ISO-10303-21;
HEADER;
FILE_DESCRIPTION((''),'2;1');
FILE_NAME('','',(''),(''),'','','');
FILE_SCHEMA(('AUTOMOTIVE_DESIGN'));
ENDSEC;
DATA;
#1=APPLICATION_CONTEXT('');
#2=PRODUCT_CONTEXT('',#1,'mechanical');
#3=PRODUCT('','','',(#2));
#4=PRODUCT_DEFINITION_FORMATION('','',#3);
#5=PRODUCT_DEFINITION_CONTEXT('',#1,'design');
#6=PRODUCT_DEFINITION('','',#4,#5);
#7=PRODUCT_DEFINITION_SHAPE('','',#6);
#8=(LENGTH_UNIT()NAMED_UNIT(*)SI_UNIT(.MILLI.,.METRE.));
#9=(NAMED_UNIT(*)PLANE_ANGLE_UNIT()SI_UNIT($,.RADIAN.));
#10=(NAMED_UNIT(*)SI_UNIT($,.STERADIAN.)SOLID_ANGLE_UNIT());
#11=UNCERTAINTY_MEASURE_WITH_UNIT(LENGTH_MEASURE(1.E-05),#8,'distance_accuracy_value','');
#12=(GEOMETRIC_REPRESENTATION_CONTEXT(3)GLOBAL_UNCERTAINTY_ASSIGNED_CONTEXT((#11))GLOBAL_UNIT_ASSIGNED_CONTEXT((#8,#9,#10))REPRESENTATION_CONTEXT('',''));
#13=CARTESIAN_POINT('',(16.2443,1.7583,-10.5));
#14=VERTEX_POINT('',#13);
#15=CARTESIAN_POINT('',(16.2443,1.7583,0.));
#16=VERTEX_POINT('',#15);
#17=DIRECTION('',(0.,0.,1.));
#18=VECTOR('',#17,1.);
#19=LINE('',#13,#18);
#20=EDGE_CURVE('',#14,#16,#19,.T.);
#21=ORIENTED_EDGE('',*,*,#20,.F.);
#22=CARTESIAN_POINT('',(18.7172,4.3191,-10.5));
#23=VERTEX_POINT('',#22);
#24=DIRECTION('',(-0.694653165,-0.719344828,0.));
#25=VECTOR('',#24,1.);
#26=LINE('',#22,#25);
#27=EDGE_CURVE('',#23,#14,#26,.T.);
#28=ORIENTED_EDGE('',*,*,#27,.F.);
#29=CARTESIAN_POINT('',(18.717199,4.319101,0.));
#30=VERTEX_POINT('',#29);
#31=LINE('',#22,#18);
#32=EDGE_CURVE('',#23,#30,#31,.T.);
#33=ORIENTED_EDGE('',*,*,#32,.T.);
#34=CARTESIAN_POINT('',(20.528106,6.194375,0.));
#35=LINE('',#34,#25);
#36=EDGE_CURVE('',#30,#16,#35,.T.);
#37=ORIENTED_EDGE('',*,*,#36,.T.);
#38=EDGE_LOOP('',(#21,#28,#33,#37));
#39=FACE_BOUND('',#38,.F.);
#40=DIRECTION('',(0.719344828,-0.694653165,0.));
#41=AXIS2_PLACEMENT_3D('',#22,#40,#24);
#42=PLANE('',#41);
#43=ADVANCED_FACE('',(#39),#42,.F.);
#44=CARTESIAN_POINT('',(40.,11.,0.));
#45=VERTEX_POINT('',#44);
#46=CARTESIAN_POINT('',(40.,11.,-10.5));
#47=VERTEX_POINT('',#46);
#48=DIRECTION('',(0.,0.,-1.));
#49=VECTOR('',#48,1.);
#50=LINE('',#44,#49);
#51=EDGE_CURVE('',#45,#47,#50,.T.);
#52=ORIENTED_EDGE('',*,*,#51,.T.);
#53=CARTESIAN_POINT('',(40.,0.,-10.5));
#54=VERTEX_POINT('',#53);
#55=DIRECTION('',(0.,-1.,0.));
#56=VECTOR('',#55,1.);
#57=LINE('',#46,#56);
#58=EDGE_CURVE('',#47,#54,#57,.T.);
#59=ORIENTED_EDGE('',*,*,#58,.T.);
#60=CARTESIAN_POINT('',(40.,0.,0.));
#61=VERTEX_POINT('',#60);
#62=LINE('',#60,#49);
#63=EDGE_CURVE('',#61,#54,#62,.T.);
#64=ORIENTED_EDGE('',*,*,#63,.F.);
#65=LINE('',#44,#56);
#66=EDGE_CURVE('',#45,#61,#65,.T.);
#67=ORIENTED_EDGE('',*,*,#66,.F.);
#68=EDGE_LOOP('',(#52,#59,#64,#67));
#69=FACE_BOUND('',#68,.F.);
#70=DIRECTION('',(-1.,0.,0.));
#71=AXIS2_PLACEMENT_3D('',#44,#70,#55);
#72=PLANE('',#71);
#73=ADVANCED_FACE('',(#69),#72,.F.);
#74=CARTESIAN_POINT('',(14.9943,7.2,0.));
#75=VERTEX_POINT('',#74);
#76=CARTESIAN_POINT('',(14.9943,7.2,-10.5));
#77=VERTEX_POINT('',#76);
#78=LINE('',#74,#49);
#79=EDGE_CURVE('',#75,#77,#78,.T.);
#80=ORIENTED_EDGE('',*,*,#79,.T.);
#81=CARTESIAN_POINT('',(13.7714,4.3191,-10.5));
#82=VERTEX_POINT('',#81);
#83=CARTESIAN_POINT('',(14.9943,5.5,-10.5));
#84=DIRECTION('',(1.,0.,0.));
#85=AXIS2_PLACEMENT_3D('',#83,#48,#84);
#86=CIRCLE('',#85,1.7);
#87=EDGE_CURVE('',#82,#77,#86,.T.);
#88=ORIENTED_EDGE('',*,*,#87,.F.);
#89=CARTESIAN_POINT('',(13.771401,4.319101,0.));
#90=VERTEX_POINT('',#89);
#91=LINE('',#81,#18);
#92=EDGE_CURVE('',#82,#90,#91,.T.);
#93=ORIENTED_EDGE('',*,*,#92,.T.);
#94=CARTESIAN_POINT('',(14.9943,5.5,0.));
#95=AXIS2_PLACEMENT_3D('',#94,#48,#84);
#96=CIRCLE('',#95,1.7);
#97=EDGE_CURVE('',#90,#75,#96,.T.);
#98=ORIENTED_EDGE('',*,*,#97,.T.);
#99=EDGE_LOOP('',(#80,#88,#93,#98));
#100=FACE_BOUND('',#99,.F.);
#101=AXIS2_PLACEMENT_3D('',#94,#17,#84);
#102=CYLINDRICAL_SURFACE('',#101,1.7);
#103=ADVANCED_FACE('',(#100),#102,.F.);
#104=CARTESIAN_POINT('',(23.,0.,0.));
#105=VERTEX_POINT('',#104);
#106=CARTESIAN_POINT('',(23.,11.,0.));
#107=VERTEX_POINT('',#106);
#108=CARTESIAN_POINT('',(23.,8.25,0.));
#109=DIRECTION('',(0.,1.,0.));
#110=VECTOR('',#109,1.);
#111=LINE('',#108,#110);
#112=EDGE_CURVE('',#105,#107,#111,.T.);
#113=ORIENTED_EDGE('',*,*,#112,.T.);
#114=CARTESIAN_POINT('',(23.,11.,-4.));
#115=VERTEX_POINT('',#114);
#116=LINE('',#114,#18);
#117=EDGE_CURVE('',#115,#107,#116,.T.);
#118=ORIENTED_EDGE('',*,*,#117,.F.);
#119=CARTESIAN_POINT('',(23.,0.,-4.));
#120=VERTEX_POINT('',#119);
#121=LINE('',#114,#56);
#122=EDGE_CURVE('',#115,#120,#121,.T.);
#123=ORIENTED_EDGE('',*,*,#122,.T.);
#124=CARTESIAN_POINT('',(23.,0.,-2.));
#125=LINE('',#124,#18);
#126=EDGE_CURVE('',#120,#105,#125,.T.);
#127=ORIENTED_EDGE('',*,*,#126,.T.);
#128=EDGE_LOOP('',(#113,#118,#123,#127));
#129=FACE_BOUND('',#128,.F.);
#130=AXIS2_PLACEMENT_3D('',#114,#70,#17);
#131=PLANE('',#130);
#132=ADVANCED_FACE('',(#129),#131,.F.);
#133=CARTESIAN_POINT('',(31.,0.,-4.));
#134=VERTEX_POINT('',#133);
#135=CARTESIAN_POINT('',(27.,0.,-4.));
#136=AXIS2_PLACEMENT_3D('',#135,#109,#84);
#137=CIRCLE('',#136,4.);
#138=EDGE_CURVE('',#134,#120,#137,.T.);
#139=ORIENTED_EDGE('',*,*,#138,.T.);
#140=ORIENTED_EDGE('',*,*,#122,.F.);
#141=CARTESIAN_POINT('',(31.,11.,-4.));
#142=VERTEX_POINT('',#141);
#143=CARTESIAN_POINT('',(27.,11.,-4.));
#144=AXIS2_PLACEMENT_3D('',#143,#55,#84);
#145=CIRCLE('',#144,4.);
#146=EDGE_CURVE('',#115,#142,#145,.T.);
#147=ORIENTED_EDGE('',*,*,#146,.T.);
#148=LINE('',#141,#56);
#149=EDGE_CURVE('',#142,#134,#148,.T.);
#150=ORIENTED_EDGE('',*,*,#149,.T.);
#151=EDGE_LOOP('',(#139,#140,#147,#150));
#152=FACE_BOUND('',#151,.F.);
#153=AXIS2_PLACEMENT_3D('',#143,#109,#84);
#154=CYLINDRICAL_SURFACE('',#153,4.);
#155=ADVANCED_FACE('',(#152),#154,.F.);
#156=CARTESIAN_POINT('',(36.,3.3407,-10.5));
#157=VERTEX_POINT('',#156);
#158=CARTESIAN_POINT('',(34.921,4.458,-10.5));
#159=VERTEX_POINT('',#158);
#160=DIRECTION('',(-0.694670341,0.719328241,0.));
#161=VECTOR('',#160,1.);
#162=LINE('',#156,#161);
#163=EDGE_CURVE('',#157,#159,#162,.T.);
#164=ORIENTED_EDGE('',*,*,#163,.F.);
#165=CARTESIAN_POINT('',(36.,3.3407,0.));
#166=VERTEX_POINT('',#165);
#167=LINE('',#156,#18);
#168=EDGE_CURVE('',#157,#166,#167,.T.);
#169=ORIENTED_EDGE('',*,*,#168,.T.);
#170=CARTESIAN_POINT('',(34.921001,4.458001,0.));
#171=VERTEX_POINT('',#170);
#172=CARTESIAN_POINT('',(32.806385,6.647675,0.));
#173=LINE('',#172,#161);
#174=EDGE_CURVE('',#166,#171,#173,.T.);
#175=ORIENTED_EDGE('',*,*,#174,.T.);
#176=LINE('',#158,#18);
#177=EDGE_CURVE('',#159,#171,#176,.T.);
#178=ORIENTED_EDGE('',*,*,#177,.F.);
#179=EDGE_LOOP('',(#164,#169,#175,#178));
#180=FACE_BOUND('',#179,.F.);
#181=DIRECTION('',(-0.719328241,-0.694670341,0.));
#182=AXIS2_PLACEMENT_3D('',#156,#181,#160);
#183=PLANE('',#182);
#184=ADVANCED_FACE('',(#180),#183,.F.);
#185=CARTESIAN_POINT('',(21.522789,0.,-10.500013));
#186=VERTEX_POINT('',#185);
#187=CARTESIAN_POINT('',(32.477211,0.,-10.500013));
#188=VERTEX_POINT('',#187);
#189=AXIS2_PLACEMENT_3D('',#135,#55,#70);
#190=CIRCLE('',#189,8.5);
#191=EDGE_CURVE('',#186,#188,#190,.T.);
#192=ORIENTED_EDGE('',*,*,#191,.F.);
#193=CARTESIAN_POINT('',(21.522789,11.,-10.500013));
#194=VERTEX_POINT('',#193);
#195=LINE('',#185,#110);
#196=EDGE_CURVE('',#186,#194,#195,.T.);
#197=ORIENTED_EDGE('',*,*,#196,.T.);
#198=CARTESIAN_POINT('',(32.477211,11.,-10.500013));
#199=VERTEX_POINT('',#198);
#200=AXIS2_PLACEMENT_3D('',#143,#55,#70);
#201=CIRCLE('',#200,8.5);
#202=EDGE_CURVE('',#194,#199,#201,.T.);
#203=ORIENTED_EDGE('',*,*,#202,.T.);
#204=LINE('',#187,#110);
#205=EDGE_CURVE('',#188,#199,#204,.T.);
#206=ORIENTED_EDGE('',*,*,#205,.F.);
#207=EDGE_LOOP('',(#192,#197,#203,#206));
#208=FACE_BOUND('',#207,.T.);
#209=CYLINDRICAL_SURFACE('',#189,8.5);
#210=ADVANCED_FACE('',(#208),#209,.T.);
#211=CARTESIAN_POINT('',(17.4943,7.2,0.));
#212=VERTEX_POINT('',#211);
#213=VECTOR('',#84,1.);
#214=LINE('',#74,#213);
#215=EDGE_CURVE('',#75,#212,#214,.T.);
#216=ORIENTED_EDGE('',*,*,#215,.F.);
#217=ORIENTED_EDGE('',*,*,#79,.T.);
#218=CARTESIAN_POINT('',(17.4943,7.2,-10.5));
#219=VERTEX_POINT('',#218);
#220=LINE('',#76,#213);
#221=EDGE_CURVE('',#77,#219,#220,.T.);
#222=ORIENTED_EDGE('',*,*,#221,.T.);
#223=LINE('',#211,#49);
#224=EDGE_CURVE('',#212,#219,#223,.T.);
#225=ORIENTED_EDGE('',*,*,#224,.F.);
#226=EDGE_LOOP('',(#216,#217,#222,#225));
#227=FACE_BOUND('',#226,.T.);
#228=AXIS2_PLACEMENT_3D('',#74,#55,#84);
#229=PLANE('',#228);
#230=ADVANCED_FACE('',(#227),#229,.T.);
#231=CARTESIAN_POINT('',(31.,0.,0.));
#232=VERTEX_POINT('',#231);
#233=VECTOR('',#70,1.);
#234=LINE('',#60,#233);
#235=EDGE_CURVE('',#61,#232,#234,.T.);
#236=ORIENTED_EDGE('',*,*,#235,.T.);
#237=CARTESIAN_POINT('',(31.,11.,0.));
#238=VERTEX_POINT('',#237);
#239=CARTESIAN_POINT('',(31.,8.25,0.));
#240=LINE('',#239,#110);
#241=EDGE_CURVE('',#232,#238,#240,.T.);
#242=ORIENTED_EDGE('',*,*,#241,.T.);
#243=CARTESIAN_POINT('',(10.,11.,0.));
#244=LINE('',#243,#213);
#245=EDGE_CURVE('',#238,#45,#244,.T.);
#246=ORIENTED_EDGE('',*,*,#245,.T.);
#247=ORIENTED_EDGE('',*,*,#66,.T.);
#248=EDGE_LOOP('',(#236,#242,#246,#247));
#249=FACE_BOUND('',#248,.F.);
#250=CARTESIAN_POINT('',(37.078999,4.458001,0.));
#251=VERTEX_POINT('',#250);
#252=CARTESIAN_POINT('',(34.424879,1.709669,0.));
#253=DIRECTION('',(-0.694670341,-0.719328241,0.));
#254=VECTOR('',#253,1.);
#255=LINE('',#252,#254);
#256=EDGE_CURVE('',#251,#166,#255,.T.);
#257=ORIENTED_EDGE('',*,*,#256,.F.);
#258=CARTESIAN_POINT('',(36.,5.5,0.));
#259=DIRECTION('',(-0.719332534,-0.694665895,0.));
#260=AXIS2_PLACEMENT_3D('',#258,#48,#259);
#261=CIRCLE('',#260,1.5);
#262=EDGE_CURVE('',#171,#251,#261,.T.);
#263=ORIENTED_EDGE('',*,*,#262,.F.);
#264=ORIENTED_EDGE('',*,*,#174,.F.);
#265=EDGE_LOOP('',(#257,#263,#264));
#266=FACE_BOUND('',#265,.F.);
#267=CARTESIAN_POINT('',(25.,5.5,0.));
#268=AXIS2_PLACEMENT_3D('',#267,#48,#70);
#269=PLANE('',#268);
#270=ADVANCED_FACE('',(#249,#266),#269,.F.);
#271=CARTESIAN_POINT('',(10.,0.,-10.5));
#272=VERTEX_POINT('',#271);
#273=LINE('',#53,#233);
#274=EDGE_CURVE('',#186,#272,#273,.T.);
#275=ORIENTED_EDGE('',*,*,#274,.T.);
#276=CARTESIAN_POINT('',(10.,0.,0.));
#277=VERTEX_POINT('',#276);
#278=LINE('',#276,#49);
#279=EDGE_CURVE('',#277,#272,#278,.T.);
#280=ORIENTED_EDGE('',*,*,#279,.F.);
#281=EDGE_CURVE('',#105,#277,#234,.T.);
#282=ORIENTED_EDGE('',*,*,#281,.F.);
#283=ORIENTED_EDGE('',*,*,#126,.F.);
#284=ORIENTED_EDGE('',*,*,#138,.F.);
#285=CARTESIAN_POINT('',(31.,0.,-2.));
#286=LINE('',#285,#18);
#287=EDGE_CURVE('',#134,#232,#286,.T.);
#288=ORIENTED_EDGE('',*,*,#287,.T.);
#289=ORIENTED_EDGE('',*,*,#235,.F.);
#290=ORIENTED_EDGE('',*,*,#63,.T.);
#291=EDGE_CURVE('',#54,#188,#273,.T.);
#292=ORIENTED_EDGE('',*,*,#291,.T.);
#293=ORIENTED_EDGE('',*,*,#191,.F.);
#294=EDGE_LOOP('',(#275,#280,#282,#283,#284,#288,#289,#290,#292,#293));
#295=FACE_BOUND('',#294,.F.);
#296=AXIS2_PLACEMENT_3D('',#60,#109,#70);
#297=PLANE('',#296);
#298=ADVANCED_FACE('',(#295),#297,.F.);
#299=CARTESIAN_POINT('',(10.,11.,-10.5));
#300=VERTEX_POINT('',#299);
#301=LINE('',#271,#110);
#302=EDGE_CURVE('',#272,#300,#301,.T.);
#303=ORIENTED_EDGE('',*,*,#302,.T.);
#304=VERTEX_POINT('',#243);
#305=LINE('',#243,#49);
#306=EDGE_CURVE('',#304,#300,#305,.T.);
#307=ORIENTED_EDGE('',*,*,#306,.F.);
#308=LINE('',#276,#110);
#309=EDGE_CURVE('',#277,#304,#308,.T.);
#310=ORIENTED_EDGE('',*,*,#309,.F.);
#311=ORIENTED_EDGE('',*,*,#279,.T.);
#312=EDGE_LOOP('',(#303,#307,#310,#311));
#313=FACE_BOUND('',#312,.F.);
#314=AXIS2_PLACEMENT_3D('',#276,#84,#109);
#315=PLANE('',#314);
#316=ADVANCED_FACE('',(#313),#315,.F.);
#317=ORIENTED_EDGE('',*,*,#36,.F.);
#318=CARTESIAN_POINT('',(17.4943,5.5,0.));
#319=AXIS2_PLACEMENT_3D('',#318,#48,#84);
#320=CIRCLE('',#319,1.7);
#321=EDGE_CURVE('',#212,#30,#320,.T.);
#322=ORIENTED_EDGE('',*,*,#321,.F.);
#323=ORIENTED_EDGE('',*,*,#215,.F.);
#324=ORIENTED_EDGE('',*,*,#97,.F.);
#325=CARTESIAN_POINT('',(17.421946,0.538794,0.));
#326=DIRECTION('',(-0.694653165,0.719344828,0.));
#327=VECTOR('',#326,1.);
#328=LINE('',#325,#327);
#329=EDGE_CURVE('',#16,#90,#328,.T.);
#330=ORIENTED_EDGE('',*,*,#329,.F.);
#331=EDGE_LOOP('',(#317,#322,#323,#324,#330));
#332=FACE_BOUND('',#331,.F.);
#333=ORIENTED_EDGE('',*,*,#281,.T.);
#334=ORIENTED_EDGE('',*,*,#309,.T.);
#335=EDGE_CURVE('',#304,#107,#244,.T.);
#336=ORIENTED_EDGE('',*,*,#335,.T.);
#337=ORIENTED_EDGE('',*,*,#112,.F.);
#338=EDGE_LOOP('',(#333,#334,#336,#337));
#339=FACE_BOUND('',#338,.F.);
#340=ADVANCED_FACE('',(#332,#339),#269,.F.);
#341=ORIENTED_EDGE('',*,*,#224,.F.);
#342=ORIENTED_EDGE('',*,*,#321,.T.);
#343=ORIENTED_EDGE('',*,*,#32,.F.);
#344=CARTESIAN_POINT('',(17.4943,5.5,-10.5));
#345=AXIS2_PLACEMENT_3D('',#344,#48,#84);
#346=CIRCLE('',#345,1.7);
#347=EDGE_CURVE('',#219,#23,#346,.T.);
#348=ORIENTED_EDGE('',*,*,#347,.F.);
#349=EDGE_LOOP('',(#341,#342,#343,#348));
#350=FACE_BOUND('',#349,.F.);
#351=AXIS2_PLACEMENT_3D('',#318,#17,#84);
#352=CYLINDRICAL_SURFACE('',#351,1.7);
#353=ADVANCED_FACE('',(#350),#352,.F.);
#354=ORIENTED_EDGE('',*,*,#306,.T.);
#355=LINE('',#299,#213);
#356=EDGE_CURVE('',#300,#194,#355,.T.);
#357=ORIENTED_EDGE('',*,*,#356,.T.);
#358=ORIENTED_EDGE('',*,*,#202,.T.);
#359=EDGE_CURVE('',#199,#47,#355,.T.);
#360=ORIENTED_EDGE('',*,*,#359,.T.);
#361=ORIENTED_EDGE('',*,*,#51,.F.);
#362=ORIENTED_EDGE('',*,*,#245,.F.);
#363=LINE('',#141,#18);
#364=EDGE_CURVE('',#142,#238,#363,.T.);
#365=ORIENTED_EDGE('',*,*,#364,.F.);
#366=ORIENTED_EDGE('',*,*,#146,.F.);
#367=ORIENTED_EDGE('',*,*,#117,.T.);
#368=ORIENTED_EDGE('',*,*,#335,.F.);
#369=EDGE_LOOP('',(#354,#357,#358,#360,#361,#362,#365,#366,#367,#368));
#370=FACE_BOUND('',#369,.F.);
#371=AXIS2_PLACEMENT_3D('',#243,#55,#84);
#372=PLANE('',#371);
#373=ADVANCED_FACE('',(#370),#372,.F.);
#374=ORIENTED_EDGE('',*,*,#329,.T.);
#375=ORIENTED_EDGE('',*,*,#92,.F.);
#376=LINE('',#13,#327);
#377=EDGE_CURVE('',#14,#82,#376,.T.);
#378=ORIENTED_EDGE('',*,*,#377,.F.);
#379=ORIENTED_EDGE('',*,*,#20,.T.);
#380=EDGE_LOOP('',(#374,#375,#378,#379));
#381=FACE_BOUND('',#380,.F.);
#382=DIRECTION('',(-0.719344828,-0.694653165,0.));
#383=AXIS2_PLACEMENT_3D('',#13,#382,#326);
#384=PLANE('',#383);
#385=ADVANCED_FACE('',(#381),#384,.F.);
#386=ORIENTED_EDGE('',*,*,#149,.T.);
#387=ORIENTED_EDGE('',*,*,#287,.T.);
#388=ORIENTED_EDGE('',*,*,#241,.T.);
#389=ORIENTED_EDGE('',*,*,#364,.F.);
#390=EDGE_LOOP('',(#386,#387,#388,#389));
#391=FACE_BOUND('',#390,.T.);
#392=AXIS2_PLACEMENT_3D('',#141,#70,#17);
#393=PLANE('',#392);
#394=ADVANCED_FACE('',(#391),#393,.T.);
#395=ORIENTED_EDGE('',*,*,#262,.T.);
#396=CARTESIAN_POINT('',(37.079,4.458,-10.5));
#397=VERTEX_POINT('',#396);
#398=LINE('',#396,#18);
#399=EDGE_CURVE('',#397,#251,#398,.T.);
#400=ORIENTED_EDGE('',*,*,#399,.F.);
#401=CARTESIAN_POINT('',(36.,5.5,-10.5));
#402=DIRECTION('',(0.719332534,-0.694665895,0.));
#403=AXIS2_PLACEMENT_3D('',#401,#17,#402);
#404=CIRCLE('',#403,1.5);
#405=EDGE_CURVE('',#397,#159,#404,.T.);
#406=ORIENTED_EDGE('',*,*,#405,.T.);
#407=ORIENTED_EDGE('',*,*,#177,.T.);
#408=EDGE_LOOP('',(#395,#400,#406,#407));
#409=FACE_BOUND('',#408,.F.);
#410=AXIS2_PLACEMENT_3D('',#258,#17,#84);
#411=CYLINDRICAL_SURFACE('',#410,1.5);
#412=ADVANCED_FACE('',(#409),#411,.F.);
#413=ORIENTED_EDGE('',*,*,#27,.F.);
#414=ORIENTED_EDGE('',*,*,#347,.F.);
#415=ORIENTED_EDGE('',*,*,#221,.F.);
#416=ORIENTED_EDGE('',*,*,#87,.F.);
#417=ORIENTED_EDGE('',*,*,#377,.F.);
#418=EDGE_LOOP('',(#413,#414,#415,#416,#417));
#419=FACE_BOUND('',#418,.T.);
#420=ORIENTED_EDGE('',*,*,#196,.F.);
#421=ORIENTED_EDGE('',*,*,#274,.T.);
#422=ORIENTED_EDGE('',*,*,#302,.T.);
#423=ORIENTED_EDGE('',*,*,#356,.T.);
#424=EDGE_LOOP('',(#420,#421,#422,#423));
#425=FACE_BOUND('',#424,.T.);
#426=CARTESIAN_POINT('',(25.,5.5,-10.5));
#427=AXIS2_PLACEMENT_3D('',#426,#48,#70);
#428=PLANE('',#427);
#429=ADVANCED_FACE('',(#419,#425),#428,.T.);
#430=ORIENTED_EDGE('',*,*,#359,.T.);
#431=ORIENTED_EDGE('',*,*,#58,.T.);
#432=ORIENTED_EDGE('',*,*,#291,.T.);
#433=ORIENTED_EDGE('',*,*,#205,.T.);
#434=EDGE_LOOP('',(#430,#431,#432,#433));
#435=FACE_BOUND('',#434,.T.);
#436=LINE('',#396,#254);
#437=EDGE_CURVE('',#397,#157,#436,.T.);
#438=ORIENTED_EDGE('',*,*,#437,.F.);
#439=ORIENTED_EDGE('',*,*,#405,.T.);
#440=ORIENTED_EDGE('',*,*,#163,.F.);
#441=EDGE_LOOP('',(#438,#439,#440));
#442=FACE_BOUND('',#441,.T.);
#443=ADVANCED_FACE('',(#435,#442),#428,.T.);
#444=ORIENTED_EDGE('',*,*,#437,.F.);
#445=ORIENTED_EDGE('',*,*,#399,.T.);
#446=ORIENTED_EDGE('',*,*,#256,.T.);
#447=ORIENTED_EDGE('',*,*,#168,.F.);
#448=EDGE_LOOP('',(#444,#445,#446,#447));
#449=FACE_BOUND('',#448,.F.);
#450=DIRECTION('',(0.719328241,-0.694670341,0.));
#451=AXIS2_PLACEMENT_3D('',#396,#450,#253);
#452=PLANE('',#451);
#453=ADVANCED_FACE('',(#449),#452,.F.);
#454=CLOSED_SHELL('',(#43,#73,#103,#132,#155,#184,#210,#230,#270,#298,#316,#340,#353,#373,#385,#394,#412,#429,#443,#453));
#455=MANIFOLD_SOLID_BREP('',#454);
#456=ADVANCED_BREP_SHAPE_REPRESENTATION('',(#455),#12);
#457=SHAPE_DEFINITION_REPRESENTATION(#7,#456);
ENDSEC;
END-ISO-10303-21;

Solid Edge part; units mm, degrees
sketch "Sketch1" plane through (0, 0, 0) normal (0, 0, 1) x (1, 0, 0)
  line L0 (10, 11) -> (40, 11)
  line L1 (40, 11) -> (40, 0)
  line L2 (40, 0) -> (10, 0)
  line L3 (10, 0) -> (10, 11)
  circle A0 centre (36, 5.5) radius 1.5
  arc A1 (14.9943, 3.8) -> (14.9943, 7.2) centre (14.9943, 5.5) cw
  line L4 (17.4943, 3.8) -> (14.9943, 3.8)
  arc A2 (17.4943, 7.2) -> (17.4943, 3.8) centre (17.4943, 5.5) cw
  line L5 (14.9943, 7.2) -> (17.4943, 7.2)
  dimension "D1" = 30
  dimension "D2" = 1.7
  dimension "D3" = 3
extrude "Protrusion1" add sketch "Sketch1" against normal up to vertex (10.5 mm away)
sketch "Sketch2" plane through (23.4971, 11, -6.25) normal (0, 1, 0) x (1, 0, 0)
  line L0 (-0.4971, -2.25) -> (-0.4971, -7.4687)
  line L1 (7.5029, -2.25) -> (7.5029, -8.6329)
  arc A0 (-0.4971, -2.25) -> (7.5029, -2.25) centre (3.5029, -2.25) cw
extrude "Cutout1" cut sketch "Sketch2" against normal through all material side at (23.05, 11, -1.3906)
sketch "Sketch3" plane through (25, 0, -5.25) normal (0, -1, 0) x (-1, 0, 0)
  line L0 (-7.4772, 5.25) -> (3.4772, 5.25)
  arc A0 (3.4772, 5.25) -> (-7.4772, 5.25) centre (-2, -1.25) ccw
extrude "Protrusion2" add sketch "Sketch3" against normal up to vertex (11 mm away)
sketch "Sketch4" plane through (15.7614, 5.5, -10.5) normal (0, 0, -1) x (1, 0, 0)
  line L0 (1.7329, 0) -> (2.9558, 1.1809)
  line L1 (2.9558, 1.1809) -> (0.4829, 3.7417)
  line L2 (0.4829, 3.7417) -> (-1.99, 1.1809)
  line L3 (-1.99, 1.1809) -> (1.7329, 0)
extrude "Cutout2" cut sketch "Sketch4" against normal through all
sketch "Sketch5" plane through (36.2386, 5.5, -10.5) normal (0, 0, -1) x (1, 0, 0)
  line L0 (-0.2386, 0) -> (0.8404, 1.042)
  line L1 (0.8404, 1.042) -> (-0.2386, 2.1593)
  line L2 (-0.2386, 2.1593) -> (-1.3176, 1.042)
  line L3 (-1.3176, 1.042) -> (-0.2386, 0)
extrude "Cutout3" cut sketch "Sketch5" against normal through all
properties material "ABS Plastic, medium impact"
